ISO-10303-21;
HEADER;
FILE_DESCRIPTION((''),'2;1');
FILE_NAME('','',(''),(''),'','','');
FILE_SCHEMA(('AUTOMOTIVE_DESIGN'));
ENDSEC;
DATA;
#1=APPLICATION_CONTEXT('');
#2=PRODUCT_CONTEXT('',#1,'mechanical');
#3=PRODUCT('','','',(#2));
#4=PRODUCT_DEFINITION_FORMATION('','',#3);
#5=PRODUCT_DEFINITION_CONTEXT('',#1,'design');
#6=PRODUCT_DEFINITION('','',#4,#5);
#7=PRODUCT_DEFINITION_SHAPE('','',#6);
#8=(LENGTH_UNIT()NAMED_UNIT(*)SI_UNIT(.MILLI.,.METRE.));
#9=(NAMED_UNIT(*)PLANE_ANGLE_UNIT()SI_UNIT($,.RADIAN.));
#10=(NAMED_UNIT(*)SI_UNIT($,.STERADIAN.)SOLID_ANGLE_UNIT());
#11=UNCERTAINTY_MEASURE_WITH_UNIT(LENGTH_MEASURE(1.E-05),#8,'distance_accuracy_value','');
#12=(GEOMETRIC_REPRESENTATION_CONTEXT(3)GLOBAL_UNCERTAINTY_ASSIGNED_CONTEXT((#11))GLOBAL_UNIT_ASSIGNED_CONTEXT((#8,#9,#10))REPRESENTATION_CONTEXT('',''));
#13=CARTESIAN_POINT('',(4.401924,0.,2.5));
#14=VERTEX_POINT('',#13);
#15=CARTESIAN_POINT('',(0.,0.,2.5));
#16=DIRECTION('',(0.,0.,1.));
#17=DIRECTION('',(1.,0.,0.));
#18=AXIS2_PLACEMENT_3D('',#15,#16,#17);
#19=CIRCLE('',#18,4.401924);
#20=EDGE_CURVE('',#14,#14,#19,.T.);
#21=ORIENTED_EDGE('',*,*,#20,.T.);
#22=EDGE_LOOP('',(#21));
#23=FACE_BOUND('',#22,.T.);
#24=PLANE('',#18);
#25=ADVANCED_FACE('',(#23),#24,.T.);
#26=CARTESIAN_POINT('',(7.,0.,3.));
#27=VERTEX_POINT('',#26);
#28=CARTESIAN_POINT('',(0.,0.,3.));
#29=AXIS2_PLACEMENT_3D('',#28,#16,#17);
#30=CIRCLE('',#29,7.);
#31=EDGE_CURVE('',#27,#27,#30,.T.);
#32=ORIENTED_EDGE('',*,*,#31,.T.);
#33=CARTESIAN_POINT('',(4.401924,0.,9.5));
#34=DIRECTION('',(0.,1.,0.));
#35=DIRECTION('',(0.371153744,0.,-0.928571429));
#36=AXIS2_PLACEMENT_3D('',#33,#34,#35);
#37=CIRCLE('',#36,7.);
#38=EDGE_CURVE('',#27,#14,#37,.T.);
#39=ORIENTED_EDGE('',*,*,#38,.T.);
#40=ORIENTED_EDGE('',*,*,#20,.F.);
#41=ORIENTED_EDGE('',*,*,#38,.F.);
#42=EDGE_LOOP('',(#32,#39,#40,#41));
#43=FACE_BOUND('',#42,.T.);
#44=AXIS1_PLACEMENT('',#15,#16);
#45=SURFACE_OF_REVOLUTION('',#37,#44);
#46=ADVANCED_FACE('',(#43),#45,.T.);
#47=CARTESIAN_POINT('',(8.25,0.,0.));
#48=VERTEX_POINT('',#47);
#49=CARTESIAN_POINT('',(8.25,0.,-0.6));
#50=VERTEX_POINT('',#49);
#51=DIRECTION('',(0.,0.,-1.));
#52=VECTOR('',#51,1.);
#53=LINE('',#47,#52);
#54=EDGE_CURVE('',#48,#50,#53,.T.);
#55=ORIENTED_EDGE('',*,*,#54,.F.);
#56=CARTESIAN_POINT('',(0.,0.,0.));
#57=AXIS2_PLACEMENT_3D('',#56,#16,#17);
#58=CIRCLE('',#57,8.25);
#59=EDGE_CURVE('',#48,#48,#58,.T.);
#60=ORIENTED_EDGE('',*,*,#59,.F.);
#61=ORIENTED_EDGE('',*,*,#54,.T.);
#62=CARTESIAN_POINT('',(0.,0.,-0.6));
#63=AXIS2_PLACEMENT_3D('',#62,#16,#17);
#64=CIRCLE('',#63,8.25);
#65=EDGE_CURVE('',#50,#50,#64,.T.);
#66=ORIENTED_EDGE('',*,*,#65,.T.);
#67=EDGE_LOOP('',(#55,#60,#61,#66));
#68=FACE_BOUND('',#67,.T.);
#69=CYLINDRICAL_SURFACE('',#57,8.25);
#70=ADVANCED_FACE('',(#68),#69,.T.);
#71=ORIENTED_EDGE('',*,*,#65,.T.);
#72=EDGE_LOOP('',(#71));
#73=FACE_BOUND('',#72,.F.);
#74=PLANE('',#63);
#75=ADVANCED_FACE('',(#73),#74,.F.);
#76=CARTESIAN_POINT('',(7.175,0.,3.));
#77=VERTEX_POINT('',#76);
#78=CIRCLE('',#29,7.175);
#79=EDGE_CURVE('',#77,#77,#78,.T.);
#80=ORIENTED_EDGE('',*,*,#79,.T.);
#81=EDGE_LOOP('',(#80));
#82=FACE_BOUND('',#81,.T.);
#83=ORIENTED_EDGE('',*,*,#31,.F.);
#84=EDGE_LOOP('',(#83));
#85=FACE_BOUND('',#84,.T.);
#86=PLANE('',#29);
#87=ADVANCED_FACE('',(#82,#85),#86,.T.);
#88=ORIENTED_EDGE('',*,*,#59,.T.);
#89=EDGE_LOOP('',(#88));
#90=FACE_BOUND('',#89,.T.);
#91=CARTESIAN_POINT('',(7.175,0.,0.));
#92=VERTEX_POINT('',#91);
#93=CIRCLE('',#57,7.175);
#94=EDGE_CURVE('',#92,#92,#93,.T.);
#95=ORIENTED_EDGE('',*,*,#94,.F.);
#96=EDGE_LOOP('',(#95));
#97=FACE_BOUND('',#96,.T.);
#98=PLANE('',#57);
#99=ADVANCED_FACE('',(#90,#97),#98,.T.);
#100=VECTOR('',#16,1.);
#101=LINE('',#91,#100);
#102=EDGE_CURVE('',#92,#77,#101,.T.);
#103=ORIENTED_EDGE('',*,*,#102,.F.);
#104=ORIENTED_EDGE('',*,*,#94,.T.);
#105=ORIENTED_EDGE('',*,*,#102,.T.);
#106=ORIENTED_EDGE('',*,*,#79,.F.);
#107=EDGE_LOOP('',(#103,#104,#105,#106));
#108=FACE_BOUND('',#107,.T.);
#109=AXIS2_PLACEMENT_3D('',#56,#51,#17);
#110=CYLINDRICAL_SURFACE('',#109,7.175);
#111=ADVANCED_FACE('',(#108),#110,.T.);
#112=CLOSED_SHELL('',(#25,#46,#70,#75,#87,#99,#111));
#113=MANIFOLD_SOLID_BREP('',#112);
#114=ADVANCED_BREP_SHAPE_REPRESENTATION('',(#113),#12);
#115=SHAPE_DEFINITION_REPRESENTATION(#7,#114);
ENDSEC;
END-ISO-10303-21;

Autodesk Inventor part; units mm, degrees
ref_plane "YZ Plane" through (0, 0, 0) normal (1, 0, 0) x (0, 1, 0)
ref_plane "XZ Plane" through (0, 0, 0) normal (0, 1, 0) x (-1, 0, 0)
ref_plane "XY Plane" through (0, 0, 0) normal (0, 0, 1) x (1, 0, 0)
sketch "Sketch1" plane through (0, 0, 0) normal (0, 0, 1) x (1, 0, 0)
  circle A0 centre (0, 0) radius 7.175
  circle A1 centre (0, 0) radius 8.25
  dimension "d0" = 14.35
  dimension "d1" = 16.5
extrude "Extrusion1" add sketch "Sketch1" along normal blind 3 contours A0
extrude "Extrusion2" add sketch "Sketch1" against normal blind 0.6 contours A0 | A1
sketch "Sketch2" plane through (0, 0, 3) normal (0, 0, 1) x (1, 0, 0)
  circle A0 centre (0, 0) radius 7
  dimension "d6" = 14
extrude "Extrusion3" cut sketch "Sketch2" against normal blind 0.5
fillet "Fillet1" radius 7 1 edges at (-7, 0, 2.5)
properties part number "pwrButton"
